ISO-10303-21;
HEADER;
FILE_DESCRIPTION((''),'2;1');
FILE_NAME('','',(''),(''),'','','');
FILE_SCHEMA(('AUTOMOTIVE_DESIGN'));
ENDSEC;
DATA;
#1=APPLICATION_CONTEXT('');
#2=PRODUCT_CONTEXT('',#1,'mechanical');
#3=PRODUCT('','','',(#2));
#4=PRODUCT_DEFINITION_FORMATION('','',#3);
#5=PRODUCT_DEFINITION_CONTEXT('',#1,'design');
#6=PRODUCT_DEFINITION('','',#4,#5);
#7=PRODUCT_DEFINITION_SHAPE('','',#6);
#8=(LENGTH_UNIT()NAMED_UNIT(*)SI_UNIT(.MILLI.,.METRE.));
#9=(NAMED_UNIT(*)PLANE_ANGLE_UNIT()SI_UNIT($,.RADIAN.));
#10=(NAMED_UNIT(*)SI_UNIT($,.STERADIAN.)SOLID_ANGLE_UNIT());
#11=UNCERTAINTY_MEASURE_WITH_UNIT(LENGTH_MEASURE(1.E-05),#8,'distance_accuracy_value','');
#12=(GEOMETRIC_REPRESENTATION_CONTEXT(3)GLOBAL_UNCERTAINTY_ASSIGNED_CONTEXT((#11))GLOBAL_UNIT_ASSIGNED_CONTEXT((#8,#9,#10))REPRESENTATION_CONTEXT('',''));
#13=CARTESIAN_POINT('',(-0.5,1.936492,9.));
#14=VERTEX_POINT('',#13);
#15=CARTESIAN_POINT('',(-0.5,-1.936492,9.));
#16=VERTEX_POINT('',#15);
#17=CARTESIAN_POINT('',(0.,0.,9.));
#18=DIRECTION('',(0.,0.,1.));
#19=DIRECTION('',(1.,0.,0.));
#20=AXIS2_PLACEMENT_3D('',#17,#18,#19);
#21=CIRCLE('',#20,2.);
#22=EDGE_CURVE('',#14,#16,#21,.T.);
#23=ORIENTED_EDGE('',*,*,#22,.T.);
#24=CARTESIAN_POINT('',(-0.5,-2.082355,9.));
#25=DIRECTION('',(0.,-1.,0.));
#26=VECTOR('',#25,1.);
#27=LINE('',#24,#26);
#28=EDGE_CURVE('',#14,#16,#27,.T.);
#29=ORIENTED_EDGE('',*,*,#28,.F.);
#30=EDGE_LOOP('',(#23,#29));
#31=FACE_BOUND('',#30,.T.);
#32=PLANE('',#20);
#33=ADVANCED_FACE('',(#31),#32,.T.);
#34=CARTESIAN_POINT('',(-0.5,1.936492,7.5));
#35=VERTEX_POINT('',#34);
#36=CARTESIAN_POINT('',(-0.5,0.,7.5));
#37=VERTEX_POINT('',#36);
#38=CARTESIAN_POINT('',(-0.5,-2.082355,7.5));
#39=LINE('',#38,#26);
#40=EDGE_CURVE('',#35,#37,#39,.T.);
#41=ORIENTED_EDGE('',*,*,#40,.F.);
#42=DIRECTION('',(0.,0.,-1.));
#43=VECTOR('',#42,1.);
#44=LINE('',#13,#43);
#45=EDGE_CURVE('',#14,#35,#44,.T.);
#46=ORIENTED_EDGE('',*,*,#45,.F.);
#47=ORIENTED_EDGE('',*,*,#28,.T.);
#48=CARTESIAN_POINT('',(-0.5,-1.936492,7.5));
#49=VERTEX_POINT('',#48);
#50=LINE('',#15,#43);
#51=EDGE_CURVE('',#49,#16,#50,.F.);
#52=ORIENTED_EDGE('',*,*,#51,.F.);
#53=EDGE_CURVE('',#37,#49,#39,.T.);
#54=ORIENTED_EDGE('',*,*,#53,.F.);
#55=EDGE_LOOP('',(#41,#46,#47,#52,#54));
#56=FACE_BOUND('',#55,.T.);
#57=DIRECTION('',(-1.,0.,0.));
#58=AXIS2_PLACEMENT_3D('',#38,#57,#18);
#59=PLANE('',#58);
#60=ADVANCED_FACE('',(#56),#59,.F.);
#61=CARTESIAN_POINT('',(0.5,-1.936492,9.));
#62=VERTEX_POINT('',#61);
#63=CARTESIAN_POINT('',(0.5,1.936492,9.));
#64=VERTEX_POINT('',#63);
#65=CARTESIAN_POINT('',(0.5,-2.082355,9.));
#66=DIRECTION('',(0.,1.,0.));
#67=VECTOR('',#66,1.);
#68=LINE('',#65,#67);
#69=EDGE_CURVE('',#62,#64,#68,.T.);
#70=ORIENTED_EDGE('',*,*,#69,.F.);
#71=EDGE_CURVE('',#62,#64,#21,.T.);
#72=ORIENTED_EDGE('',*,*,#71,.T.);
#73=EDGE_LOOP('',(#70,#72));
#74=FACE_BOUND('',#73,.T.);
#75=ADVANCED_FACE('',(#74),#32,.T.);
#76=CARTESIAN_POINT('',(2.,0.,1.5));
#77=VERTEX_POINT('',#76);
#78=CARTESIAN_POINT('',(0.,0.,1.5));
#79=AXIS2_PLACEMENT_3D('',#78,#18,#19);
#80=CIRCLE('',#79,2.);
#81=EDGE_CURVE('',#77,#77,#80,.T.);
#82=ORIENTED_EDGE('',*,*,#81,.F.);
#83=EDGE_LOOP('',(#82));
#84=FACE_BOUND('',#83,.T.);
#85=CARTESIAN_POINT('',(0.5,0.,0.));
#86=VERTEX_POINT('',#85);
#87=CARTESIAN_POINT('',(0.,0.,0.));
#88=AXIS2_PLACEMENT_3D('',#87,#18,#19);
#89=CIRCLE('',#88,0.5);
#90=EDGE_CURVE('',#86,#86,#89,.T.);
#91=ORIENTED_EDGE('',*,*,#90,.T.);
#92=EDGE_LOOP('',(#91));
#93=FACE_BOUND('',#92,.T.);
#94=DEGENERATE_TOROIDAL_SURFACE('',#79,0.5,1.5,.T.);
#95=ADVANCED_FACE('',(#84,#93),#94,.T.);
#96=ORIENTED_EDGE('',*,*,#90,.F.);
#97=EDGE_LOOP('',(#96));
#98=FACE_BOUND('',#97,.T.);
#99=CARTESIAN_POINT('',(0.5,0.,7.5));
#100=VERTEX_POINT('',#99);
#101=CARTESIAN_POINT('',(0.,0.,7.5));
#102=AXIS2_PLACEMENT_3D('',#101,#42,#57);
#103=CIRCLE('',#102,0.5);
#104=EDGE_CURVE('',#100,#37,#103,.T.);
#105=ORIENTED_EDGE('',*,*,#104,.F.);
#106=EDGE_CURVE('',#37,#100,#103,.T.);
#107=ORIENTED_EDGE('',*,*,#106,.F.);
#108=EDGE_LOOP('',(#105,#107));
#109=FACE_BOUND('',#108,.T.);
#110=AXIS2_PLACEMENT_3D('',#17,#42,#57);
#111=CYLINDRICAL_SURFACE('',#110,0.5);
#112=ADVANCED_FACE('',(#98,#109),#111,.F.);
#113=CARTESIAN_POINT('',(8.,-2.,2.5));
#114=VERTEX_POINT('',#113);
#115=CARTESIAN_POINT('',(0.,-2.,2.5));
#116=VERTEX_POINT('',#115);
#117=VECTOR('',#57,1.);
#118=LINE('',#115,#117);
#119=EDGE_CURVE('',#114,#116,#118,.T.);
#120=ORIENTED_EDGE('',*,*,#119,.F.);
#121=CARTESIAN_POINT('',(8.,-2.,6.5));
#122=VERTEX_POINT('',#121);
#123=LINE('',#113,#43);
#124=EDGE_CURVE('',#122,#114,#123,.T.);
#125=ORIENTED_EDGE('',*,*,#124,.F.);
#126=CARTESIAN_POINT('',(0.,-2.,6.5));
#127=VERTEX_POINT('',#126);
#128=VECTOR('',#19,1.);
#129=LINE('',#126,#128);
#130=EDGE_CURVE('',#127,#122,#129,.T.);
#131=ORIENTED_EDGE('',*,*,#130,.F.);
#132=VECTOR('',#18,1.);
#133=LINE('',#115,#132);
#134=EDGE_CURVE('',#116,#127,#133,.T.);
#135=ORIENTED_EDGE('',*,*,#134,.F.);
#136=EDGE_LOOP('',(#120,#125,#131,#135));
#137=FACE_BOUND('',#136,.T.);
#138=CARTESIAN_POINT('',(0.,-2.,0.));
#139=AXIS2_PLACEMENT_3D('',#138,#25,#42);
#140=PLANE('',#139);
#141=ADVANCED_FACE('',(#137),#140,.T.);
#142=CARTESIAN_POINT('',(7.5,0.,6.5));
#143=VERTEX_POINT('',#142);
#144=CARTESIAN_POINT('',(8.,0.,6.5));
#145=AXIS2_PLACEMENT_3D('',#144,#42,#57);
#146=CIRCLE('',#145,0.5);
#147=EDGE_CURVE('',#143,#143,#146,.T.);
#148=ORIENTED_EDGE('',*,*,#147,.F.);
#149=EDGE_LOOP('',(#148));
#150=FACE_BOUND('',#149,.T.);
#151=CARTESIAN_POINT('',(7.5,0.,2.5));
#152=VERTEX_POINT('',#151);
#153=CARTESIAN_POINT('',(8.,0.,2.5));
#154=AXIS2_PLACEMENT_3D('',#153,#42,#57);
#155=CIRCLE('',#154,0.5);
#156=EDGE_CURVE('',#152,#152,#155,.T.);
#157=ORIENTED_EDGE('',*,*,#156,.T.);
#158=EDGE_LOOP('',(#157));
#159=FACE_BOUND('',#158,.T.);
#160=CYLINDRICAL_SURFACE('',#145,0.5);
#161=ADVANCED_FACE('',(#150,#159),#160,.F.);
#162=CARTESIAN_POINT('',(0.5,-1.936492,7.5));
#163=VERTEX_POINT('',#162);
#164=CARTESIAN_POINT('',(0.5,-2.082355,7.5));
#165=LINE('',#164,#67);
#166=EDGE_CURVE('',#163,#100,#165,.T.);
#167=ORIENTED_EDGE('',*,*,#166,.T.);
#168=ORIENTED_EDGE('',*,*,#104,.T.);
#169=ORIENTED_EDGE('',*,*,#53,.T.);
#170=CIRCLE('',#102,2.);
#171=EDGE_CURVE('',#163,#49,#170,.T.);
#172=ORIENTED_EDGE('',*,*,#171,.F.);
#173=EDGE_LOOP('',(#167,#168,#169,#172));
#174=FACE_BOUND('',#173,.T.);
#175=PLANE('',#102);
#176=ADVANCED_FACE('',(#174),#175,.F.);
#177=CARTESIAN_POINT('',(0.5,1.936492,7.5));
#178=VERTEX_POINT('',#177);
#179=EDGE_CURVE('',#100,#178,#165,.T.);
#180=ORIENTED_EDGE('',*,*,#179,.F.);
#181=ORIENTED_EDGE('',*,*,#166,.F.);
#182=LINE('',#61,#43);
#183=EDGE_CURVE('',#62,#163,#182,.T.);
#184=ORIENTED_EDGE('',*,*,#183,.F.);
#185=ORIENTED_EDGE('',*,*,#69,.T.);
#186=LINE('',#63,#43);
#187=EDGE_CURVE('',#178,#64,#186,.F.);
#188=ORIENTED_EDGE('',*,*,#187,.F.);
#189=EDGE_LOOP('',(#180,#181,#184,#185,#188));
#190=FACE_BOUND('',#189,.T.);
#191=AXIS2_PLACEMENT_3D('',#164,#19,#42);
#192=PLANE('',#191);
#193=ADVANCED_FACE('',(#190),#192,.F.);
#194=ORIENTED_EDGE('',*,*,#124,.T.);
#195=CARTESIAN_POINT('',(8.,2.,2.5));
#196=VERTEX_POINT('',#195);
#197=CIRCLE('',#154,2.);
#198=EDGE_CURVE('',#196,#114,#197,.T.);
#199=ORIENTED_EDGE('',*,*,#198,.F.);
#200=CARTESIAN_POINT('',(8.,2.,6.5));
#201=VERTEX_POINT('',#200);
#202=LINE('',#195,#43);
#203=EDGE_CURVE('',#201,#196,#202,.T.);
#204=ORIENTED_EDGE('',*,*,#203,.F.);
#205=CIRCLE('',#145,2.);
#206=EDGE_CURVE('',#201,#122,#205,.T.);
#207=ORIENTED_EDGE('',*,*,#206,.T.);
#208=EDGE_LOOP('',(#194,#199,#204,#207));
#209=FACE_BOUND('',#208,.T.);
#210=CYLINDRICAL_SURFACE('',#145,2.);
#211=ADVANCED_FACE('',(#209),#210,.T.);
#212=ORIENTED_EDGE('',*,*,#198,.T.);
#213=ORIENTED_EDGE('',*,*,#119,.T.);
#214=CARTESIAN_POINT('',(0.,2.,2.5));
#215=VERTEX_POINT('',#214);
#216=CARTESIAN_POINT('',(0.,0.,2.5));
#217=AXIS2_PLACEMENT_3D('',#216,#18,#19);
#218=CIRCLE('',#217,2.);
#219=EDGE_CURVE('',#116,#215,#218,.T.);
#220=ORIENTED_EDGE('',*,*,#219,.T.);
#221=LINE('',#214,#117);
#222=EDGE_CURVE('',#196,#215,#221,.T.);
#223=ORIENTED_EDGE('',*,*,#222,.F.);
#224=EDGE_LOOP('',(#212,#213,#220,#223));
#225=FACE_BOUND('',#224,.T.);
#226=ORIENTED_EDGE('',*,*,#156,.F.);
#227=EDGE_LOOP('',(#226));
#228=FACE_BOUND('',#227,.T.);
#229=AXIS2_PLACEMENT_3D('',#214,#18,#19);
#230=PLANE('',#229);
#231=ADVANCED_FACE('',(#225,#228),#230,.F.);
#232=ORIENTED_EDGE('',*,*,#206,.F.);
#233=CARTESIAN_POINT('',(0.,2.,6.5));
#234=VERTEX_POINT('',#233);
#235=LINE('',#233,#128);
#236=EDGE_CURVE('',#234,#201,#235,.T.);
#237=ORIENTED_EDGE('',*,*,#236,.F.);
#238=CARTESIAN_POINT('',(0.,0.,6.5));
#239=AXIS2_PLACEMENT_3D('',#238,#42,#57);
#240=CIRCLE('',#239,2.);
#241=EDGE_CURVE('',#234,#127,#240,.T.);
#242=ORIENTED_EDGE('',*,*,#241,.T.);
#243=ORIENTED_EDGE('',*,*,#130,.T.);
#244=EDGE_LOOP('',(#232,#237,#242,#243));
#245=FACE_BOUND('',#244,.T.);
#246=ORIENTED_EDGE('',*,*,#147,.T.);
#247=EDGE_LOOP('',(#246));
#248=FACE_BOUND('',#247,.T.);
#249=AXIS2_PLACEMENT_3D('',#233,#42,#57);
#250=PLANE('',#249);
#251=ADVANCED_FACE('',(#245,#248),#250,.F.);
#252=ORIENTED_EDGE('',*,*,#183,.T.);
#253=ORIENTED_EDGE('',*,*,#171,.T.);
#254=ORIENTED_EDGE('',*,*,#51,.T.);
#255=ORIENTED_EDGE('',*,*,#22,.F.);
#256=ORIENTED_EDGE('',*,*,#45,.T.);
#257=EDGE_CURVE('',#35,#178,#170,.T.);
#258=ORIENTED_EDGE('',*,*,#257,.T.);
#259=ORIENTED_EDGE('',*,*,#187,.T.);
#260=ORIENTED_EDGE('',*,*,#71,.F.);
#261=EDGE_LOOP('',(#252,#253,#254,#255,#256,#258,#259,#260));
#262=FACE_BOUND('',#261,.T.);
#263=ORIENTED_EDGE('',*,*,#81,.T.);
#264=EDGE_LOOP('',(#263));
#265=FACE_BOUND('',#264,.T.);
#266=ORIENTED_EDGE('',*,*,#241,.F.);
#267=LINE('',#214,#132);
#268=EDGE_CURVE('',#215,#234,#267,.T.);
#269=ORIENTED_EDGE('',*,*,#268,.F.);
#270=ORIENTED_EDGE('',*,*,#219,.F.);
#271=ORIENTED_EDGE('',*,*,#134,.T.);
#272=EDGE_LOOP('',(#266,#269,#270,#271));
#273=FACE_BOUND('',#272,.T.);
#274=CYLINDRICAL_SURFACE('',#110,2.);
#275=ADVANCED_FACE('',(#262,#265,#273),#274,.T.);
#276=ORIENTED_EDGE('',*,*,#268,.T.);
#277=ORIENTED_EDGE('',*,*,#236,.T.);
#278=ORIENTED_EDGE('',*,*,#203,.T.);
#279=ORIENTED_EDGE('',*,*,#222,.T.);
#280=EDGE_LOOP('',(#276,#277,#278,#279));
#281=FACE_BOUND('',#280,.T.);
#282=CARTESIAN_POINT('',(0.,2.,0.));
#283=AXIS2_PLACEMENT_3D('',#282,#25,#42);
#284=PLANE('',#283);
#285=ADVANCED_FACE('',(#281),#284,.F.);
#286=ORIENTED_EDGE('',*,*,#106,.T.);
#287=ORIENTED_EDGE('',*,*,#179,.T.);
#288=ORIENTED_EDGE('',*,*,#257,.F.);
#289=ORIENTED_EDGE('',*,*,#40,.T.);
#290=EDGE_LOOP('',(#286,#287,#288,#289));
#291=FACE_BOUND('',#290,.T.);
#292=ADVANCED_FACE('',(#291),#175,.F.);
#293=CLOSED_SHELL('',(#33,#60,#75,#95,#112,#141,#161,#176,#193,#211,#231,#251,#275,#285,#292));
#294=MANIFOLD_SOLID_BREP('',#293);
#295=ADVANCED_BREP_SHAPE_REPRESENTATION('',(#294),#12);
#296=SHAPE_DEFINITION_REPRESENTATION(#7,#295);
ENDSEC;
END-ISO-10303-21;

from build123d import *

# Parameters (mm, degrees)
SKETCH_1_R          = 2
SKETCH_1_R_2        = 0.5
EXTRUDE_1_DEPTH     = 9
SKETCH_2_W          = 1
SKETCH_2_H          = 4.164709902
CUT_EXTRUDE_1_DEPTH = 1.5
FILLET_2_R          = 1.5
SKETCH_3_W          = 8
SKETCH_3_H          = 4
EXTRUDE_2_DEPTH     = 2
SKETCH_4_R          = 2
SKETCH_4_R_2        = 0.5
EXTRUDE_3_DEPTH     = 4
SKETCH_5_R          = 0.5
CUT_EXTRUDE_2_DEPTH = 4
SKETCH_6_R          = 0.5
CUT_EXTRUDE_3_DEPTH = 14.601470509


with BuildPart() as part:
    # 草图1 → 凸台-拉伸1 (new body)
    with BuildSketch(Plane.XY):
        Circle(SKETCH_1_R)
        Circle(SKETCH_1_R_2, mode=Mode.SUBTRACT)
    extrude(amount=EXTRUDE_1_DEPTH)

    # 草图2 → 切除-拉伸1 (cut)
    with BuildSketch(Plane.XY.offset(9)):
        Rectangle(SKETCH_2_W, SKETCH_2_H)
    extrude(amount=-CUT_EXTRUDE_1_DEPTH, mode=Mode.SUBTRACT)

    # 圆角2
    fillet_2_edges = [part.edges().sort_by_distance(p)[0] for p in [
        (-2, 0, 0),
    ]]
    fillet(fillet_2_edges, radius=FILLET_2_R - 0.0001)  # a hair under: the kernel refuses the full size

    # 草图3 → 凸台-拉伸2 (add, symmetric)
    with BuildSketch(Plane(origin=(0, 0, 0), x_dir=(1, 0, 0), z_dir=(0, 1, 0))):
        with Locations((4, -4.5)):
            Rectangle(SKETCH_3_W, SKETCH_3_H)
    extrude(amount=EXTRUDE_2_DEPTH, both=True)

    # 草图4 → 凸台-拉伸3 (add)
    with BuildSketch(Plane(origin=(0, 0, 2.5), x_dir=(-1, 0, 0), z_dir=(0, 0, -1))):
        with Locations((-8, 0)):
            Circle(SKETCH_4_R)
        with Locations((-8, 0)):
            Circle(SKETCH_4_R_2, mode=Mode.SUBTRACT)
    extrude(amount=-EXTRUDE_3_DEPTH)

    # 草图5 → 切除-拉伸2 (cut)
    with BuildSketch(Plane(origin=(0, 0, 2.5), x_dir=(-1, 0, 0), z_dir=(0, 0, -1))):
        with Locations((-8, 0)):
            Circle(SKETCH_5_R)
    extrude(amount=-CUT_EXTRUDE_2_DEPTH, mode=Mode.SUBTRACT)

    # 草图6 → 切除-拉伸3 (cut, through all)
    with BuildSketch(Plane.XY.offset(9)):
        Circle(SKETCH_6_R)
    extrude(amount=-CUT_EXTRUDE_3_DEPTH, mode=Mode.SUBTRACT)


solid = part.part
